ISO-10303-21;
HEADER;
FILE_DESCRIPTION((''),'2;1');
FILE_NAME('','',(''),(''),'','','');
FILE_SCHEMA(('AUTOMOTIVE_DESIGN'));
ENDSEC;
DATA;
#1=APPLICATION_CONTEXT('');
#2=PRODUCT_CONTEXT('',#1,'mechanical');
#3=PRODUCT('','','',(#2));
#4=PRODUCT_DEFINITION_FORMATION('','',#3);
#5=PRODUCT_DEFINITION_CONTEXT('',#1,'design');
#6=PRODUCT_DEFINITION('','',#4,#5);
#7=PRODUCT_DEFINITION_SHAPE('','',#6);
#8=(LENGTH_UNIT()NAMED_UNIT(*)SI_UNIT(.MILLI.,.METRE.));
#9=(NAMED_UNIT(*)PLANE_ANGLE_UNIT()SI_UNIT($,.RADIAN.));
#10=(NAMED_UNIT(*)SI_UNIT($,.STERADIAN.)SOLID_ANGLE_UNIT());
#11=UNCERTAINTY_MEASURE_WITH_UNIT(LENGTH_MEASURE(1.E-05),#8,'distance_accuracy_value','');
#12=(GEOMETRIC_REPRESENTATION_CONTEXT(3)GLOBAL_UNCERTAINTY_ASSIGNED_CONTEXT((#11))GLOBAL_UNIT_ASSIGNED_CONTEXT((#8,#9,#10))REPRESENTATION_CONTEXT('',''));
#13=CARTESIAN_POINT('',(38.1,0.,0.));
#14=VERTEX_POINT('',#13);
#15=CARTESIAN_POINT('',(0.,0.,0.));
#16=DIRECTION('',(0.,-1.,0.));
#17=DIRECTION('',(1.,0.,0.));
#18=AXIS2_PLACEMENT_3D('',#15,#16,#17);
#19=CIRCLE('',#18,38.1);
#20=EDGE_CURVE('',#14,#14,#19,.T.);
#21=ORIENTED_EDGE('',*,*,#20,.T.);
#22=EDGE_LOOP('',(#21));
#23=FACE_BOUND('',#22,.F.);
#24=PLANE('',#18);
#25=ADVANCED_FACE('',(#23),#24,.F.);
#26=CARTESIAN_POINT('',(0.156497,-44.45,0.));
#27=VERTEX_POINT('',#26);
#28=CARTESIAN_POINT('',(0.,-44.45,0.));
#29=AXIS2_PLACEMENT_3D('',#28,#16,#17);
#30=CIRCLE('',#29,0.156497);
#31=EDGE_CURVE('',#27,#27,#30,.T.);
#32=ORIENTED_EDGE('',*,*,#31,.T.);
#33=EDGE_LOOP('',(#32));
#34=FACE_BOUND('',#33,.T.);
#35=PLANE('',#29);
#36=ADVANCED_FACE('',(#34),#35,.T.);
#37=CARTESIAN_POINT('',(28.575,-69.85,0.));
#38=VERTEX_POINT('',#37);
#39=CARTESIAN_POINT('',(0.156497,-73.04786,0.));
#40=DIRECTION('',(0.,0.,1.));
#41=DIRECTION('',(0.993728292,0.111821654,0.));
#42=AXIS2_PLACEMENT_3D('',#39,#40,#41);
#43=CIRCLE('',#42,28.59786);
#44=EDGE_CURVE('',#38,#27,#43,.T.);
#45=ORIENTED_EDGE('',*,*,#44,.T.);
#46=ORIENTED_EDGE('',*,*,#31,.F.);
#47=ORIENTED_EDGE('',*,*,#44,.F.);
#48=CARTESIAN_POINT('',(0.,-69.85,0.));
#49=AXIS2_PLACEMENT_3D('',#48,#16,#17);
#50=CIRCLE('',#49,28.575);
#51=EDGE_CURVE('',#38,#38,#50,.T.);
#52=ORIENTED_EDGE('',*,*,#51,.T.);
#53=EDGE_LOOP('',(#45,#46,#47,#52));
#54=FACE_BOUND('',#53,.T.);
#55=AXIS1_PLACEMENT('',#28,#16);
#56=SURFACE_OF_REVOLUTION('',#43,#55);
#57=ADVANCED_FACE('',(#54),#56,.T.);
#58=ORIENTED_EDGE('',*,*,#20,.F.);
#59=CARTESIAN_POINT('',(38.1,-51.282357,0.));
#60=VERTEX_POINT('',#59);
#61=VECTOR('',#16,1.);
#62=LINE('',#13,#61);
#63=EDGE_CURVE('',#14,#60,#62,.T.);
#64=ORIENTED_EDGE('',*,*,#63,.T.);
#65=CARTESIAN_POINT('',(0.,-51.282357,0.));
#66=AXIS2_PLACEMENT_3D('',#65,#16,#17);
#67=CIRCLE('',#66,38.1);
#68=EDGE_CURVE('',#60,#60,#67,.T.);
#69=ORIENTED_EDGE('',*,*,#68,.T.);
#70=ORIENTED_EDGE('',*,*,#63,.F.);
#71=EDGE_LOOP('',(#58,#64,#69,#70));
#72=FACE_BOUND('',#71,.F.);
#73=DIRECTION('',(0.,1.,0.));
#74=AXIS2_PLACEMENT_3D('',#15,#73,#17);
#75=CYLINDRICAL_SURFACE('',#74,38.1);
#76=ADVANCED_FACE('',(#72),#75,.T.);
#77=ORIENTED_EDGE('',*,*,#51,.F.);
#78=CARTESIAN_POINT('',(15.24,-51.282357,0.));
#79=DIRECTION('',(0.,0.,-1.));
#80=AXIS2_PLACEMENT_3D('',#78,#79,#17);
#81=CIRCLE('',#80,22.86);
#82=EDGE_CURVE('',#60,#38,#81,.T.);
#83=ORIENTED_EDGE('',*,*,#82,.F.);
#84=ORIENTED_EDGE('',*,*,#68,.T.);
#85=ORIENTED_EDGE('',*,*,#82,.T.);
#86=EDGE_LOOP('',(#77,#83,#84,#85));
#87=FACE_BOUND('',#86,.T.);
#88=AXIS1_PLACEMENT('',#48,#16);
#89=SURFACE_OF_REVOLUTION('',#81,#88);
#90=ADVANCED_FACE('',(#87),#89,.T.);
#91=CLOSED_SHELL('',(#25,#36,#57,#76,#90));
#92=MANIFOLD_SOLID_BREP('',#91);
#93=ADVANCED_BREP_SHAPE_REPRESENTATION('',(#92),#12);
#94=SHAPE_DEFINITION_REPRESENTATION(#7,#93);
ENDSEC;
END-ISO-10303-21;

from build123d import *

# Parameters (mm, degrees)
F0_R     = 38.1
F1_DEPTH = 69.85
F2_R     = 28.575
F3_DEPTH = 25.4


# Not quite as in the source:
# - a fillet or chamfer that OpenCascade refuses, or shapes differently, is made with other operations: its cross-section is extruded or revolved along the edge and cut away or added


with BuildPart() as f1:
    # F0 (on Front) → F1 (new body)
    with BuildSketch(Plane.XZ):
        Circle(F0_R)
    extrude(amount=F1_DEPTH)

    # F2 (on face) → F3 (cut)
    with BuildSketch(Plane.XZ.offset(69.85)):
        Circle(F2_R)
    extrude(amount=-F3_DEPTH, mode=Mode.SUBTRACT)

    # F4: fillet of radius 28.59786 on 1 edges, made by hand

    # F4_s1 → F4_t2 (revolve)
    with BuildSketch(Plane.XY):
        with BuildLine():
            ThreePointArc((28.575, -69.85), (19.2141159123, -51.7254592304), (0.1564974356, -44.45))
            Line((0.1564974356, -44.45), (28.575, -44.45))
            Line((28.575, -44.45), (28.575, -69.85))
        make_face()
    revolve(axis=Axis((0, -44.45, 0), (0, -1, 0)))

    # F5: fillet of radius 22.86 on 1 edges, made by hand

    # F5_s1 → F5_t2 (revolve, cut)
    with BuildSketch(Plane.XY):
        with BuildLine():
            ThreePointArc((38.1, -51.2823567731), (35.5798340701, -61.7164714936), (28.575, -69.85))
            Line((28.575, -69.85), (38.1, -69.85))
            Line((38.1, -69.85), (38.1, -51.2823567731))
        make_face()
    revolve(axis=Axis((0, -69.85, 0), (0, -1, 0)), mode=Mode.SUBTRACT)


solid = f1.part
